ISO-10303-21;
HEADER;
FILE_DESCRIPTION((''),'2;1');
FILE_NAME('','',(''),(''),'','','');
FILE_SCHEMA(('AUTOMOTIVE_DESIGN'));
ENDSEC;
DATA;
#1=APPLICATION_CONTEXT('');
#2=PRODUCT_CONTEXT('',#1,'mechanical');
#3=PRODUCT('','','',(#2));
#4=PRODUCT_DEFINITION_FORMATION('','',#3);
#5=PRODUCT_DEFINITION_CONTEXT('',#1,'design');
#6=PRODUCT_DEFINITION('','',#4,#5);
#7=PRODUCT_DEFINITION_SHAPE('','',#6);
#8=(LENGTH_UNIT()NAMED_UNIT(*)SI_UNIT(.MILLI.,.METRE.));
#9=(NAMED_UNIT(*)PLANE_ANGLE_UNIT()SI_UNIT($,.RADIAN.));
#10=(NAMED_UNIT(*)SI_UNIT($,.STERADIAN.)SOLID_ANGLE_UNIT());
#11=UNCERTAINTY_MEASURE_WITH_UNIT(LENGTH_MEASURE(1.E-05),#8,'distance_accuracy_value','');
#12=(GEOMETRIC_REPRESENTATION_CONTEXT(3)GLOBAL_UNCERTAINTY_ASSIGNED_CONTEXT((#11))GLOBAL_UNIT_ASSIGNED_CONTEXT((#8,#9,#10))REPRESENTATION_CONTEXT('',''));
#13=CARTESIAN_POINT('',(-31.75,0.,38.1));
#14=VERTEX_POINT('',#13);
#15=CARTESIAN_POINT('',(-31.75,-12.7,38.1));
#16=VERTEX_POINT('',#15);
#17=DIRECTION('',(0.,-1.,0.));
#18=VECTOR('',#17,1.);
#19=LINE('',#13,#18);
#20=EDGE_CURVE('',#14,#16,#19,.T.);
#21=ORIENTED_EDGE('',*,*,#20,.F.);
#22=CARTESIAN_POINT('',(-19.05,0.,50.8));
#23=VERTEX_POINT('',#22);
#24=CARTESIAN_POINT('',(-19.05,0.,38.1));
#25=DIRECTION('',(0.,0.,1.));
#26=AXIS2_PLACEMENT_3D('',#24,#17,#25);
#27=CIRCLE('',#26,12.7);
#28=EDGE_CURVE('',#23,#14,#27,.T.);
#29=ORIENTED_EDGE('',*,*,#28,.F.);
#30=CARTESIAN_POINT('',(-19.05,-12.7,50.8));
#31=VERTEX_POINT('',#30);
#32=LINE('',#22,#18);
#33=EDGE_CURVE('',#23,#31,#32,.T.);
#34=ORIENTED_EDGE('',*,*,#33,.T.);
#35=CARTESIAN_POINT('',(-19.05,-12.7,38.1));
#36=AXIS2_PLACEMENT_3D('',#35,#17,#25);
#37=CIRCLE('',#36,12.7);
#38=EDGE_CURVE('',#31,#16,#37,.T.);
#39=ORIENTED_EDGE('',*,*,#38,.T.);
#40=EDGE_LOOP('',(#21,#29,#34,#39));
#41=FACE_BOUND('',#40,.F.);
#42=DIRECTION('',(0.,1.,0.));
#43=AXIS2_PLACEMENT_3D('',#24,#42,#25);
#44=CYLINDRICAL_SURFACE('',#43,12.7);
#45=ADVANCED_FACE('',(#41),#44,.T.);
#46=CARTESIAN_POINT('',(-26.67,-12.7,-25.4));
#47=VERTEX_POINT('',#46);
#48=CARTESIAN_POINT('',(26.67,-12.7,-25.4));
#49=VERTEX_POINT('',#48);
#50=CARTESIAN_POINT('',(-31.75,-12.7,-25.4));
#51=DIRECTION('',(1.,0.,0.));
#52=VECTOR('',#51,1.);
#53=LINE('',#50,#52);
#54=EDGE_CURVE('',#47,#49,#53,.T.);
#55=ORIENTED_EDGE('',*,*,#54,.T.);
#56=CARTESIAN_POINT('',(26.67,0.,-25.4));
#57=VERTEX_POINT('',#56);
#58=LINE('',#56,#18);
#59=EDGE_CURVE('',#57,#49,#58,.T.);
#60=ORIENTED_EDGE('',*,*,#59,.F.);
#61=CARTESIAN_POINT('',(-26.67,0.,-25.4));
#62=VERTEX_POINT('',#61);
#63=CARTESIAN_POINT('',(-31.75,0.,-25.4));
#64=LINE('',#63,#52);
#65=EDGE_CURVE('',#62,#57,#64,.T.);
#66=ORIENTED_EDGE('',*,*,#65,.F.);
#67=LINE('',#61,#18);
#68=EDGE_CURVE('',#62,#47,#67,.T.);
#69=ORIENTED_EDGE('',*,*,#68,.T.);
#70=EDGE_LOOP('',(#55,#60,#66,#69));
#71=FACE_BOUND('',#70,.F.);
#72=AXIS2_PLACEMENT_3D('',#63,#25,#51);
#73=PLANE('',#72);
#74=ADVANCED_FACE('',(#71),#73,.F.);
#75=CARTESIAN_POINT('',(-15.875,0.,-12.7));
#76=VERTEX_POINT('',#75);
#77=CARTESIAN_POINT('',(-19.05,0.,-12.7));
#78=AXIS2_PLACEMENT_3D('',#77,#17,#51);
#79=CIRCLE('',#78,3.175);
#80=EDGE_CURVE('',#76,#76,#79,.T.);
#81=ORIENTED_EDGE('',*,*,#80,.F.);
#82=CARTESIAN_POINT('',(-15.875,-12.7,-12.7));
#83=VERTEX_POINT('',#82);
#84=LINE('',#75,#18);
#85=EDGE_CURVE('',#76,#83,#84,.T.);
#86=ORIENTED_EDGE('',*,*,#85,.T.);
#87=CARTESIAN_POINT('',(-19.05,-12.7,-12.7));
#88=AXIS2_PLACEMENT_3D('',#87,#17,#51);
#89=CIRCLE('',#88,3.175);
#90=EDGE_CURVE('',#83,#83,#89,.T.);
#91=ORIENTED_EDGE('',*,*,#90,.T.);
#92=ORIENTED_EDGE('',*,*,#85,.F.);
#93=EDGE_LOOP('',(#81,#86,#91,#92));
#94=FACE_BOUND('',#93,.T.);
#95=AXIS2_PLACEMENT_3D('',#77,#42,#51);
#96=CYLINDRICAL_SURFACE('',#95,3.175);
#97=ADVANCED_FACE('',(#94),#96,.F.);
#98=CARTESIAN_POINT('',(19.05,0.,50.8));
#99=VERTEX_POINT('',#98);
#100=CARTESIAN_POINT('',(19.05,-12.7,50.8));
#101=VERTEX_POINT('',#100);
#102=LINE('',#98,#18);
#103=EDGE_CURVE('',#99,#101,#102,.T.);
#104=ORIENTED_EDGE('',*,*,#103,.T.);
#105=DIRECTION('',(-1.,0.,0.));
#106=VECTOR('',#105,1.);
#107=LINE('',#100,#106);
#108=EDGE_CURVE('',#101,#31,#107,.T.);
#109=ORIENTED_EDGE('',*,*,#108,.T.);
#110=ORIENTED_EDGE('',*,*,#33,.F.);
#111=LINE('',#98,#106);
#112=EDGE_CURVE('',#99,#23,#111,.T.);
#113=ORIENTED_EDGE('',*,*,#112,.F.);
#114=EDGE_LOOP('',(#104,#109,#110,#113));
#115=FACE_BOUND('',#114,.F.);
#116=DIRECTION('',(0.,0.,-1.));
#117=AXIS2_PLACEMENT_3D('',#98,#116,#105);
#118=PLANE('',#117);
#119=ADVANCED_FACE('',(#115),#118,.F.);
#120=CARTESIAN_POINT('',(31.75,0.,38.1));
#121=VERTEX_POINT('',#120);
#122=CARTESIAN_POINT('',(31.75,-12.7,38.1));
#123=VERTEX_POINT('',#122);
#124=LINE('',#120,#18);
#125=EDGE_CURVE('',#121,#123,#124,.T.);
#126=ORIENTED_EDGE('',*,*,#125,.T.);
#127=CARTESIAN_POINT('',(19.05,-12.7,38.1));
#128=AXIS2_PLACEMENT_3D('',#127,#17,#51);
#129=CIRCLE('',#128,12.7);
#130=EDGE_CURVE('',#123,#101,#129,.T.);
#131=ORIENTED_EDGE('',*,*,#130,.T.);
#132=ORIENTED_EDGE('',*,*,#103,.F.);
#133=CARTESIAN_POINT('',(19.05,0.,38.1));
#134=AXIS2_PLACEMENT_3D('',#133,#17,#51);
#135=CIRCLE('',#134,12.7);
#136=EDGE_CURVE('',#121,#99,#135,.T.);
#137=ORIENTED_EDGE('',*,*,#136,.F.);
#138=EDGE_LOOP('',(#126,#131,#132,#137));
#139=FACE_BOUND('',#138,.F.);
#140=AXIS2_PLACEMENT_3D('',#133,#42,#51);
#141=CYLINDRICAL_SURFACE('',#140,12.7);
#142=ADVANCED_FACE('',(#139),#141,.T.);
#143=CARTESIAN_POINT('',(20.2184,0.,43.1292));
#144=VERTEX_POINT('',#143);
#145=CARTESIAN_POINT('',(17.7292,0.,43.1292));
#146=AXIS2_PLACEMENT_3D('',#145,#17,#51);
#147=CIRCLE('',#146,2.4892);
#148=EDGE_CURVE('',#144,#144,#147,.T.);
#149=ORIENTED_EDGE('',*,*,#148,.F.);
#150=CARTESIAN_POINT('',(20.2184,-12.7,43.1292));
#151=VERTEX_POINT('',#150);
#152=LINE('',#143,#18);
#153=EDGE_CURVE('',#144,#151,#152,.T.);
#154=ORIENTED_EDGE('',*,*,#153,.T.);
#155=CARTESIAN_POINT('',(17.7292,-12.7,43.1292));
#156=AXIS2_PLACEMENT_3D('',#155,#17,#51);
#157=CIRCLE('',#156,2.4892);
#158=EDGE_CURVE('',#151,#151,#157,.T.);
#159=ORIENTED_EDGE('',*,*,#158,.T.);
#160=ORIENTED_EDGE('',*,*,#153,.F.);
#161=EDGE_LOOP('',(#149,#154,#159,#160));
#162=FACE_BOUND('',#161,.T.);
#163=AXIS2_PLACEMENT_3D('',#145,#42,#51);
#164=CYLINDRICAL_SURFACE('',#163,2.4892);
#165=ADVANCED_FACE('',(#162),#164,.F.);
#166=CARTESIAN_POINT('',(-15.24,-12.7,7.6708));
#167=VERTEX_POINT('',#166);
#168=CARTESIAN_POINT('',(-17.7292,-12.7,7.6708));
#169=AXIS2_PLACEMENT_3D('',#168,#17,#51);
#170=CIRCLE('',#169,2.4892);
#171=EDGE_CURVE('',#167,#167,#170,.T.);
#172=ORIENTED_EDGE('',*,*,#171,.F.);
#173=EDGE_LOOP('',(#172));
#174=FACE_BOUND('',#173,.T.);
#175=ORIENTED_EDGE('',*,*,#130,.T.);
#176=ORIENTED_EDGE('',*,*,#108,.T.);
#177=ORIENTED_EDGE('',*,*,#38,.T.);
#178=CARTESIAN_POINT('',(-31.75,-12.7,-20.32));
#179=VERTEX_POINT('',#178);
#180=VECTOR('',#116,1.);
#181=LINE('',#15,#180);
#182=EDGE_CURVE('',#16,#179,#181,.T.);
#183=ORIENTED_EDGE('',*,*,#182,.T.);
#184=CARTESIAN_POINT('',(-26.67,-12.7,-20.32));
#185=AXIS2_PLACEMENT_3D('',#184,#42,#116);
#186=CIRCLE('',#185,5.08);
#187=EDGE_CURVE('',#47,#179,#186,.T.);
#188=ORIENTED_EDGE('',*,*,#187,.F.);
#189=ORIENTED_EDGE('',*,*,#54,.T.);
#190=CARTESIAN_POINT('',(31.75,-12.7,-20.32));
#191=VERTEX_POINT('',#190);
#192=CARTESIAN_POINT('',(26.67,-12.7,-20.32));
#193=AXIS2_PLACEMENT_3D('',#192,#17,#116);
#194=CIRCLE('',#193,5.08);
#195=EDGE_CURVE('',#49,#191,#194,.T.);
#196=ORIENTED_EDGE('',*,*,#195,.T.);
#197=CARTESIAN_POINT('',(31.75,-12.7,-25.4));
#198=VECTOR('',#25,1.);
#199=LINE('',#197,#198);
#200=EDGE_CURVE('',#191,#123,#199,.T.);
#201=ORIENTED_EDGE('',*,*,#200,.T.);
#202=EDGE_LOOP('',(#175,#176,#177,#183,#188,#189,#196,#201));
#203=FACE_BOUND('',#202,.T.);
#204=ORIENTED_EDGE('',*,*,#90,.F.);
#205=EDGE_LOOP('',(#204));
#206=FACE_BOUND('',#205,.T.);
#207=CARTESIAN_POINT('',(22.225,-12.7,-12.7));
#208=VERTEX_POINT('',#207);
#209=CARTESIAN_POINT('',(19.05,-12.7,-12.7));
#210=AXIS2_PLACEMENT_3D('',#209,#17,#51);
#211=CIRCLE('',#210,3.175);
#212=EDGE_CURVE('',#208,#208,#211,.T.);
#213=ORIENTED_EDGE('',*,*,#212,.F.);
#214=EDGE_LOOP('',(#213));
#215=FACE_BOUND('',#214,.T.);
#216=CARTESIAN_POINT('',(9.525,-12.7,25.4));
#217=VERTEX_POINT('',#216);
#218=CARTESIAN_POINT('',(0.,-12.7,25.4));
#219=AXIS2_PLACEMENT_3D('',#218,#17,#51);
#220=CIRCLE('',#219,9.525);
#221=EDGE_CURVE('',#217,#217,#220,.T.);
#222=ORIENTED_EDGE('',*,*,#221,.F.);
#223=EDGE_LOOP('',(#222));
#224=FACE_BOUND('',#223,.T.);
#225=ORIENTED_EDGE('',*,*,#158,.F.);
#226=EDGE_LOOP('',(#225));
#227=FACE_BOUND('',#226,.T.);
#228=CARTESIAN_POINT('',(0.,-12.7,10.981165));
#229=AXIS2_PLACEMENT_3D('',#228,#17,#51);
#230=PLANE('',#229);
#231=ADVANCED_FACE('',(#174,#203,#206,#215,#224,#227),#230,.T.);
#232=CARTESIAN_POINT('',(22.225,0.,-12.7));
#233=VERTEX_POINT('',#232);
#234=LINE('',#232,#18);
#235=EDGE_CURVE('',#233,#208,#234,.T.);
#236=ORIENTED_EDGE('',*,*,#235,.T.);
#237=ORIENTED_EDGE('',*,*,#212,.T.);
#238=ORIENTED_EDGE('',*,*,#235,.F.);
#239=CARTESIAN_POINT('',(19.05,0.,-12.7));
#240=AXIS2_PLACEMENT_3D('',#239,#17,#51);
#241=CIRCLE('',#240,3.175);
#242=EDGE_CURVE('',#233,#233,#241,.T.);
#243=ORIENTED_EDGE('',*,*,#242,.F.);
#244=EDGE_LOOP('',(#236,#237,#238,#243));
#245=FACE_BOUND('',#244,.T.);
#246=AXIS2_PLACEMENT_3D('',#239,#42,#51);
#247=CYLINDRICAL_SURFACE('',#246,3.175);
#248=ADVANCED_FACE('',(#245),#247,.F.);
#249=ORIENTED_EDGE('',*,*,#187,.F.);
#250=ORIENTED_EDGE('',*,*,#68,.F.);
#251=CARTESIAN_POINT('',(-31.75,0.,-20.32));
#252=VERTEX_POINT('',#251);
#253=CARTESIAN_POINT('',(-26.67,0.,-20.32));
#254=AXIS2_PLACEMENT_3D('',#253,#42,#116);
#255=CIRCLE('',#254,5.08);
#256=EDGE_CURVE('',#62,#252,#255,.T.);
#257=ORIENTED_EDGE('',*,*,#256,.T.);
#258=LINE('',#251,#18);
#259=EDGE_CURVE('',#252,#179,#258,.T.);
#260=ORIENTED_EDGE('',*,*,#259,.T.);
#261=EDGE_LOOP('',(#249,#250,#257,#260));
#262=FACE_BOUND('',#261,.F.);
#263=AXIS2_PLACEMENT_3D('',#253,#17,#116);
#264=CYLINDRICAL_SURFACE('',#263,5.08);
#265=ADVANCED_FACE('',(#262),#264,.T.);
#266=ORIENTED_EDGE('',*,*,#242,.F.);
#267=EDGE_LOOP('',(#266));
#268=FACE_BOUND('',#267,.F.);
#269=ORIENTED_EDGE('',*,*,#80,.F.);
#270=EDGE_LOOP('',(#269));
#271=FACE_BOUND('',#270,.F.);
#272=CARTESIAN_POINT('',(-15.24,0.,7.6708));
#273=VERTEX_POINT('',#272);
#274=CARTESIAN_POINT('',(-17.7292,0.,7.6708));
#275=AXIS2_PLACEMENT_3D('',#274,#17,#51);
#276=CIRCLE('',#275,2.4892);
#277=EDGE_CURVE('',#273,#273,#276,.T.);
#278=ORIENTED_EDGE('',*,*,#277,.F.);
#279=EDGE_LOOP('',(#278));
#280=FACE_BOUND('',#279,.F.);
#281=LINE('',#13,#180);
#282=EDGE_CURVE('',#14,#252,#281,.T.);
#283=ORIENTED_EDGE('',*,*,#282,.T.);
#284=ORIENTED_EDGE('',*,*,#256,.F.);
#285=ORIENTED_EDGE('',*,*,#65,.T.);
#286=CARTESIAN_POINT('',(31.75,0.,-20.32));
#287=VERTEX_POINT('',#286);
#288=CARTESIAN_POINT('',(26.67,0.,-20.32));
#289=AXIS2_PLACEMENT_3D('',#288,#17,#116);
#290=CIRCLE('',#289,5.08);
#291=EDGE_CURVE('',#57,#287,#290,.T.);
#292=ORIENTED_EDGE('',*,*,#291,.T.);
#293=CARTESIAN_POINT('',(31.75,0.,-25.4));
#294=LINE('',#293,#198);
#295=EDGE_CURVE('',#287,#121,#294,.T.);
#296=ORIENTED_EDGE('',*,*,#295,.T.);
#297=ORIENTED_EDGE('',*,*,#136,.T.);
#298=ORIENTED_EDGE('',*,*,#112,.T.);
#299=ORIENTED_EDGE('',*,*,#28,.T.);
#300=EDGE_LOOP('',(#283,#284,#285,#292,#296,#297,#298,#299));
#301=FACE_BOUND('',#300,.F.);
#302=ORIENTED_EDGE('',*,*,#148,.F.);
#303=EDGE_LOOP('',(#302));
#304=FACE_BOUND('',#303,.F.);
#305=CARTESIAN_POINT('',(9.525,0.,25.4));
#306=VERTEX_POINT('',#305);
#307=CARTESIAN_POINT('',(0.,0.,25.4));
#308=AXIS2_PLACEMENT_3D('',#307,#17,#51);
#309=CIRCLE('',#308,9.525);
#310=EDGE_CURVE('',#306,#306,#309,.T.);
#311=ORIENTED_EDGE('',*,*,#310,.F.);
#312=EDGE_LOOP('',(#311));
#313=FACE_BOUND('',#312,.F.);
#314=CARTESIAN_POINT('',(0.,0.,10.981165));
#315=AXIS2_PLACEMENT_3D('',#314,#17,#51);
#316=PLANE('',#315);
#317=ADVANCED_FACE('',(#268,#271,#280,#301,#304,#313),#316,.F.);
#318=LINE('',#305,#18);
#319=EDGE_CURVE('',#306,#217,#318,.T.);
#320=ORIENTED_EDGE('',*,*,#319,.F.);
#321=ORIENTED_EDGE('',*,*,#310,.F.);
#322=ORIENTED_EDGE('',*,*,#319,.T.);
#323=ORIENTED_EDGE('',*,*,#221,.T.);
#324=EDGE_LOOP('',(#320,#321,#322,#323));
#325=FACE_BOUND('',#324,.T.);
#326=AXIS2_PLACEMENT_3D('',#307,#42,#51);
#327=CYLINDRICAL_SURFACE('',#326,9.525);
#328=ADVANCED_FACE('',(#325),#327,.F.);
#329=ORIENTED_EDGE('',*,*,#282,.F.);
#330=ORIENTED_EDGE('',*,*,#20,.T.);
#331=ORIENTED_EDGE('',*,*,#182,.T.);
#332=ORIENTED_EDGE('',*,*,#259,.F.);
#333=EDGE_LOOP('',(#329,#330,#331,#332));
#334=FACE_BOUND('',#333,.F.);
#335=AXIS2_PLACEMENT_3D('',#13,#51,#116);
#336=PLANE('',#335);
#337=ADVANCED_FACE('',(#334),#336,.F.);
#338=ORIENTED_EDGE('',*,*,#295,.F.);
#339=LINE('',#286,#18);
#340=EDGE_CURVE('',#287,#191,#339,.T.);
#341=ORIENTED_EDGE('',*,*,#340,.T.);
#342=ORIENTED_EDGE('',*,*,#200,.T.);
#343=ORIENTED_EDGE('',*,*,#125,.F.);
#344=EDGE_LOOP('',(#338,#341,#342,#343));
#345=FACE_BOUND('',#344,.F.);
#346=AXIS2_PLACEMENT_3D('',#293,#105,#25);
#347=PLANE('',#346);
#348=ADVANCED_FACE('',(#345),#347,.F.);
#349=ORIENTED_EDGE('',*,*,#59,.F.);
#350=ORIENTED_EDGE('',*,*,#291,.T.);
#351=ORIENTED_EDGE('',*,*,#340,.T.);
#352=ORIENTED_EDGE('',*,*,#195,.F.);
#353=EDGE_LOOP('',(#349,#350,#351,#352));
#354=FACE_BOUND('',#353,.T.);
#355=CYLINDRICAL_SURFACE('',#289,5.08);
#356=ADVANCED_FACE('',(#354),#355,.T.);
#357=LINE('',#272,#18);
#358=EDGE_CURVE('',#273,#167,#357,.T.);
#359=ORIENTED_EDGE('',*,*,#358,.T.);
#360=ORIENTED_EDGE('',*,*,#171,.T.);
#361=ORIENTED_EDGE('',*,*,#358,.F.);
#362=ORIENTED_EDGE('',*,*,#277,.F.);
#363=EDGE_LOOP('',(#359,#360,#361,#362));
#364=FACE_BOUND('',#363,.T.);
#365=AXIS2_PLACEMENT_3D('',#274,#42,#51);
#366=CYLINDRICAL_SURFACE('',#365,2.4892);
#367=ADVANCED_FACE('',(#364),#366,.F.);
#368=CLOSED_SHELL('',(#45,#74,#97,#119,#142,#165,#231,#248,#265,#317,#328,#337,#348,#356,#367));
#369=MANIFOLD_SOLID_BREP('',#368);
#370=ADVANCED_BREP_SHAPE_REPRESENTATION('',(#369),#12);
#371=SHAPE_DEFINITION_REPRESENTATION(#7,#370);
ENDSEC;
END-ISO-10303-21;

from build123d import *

# Parameters (mm, degrees)
F0_R     = 3.175
F0_R_2   = 2.4892
F0_R_3   = 9.525
F1_DEPTH = 12.7
F2_R     = 5.08


with BuildPart() as f1:
    # F0 (on Front) → F1 (new body)
    with BuildSketch(Plane.XZ):
        with BuildLine():
            Line((-31.75, -25.4), (31.75, -25.4))
            Line((31.75, -25.4), (31.75, 38.1))
            ThreePointArc((31.75, 38.1), (28.0302561211, 47.0802561211), (19.05, 50.8))
            Line((19.05, 50.8), (-19.05, 50.8))
            ThreePointArc((-19.05, 50.8), (-28.0302561211, 47.0802561211), (-31.75, 38.1))
            Line((-31.75, 38.1), (-31.75, -25.4))
        make_face()
        with Locations((-19.05, -12.7)):
            Circle(F0_R, mode=Mode.SUBTRACT)
        with Locations((-17.7292, 7.6708)):
            Circle(F0_R_2, mode=Mode.SUBTRACT)
        with Locations((19.05, -12.7)):
            Circle(F0_R, mode=Mode.SUBTRACT)
        with Locations((0, 25.4)):
            Circle(F0_R_3, mode=Mode.SUBTRACT)
        with Locations((17.7292, 43.1292)):
            Circle(F0_R_2, mode=Mode.SUBTRACT)
    extrude(amount=F1_DEPTH)

    # F2
    f2_edges = [f1.edges().sort_by_distance(p)[0] for p in [
        (31.75, -6.35, -25.4),
        (-31.75, -6.35, -25.4),
    ]]
    fillet(f2_edges, radius=F2_R)


solid = f1.part
